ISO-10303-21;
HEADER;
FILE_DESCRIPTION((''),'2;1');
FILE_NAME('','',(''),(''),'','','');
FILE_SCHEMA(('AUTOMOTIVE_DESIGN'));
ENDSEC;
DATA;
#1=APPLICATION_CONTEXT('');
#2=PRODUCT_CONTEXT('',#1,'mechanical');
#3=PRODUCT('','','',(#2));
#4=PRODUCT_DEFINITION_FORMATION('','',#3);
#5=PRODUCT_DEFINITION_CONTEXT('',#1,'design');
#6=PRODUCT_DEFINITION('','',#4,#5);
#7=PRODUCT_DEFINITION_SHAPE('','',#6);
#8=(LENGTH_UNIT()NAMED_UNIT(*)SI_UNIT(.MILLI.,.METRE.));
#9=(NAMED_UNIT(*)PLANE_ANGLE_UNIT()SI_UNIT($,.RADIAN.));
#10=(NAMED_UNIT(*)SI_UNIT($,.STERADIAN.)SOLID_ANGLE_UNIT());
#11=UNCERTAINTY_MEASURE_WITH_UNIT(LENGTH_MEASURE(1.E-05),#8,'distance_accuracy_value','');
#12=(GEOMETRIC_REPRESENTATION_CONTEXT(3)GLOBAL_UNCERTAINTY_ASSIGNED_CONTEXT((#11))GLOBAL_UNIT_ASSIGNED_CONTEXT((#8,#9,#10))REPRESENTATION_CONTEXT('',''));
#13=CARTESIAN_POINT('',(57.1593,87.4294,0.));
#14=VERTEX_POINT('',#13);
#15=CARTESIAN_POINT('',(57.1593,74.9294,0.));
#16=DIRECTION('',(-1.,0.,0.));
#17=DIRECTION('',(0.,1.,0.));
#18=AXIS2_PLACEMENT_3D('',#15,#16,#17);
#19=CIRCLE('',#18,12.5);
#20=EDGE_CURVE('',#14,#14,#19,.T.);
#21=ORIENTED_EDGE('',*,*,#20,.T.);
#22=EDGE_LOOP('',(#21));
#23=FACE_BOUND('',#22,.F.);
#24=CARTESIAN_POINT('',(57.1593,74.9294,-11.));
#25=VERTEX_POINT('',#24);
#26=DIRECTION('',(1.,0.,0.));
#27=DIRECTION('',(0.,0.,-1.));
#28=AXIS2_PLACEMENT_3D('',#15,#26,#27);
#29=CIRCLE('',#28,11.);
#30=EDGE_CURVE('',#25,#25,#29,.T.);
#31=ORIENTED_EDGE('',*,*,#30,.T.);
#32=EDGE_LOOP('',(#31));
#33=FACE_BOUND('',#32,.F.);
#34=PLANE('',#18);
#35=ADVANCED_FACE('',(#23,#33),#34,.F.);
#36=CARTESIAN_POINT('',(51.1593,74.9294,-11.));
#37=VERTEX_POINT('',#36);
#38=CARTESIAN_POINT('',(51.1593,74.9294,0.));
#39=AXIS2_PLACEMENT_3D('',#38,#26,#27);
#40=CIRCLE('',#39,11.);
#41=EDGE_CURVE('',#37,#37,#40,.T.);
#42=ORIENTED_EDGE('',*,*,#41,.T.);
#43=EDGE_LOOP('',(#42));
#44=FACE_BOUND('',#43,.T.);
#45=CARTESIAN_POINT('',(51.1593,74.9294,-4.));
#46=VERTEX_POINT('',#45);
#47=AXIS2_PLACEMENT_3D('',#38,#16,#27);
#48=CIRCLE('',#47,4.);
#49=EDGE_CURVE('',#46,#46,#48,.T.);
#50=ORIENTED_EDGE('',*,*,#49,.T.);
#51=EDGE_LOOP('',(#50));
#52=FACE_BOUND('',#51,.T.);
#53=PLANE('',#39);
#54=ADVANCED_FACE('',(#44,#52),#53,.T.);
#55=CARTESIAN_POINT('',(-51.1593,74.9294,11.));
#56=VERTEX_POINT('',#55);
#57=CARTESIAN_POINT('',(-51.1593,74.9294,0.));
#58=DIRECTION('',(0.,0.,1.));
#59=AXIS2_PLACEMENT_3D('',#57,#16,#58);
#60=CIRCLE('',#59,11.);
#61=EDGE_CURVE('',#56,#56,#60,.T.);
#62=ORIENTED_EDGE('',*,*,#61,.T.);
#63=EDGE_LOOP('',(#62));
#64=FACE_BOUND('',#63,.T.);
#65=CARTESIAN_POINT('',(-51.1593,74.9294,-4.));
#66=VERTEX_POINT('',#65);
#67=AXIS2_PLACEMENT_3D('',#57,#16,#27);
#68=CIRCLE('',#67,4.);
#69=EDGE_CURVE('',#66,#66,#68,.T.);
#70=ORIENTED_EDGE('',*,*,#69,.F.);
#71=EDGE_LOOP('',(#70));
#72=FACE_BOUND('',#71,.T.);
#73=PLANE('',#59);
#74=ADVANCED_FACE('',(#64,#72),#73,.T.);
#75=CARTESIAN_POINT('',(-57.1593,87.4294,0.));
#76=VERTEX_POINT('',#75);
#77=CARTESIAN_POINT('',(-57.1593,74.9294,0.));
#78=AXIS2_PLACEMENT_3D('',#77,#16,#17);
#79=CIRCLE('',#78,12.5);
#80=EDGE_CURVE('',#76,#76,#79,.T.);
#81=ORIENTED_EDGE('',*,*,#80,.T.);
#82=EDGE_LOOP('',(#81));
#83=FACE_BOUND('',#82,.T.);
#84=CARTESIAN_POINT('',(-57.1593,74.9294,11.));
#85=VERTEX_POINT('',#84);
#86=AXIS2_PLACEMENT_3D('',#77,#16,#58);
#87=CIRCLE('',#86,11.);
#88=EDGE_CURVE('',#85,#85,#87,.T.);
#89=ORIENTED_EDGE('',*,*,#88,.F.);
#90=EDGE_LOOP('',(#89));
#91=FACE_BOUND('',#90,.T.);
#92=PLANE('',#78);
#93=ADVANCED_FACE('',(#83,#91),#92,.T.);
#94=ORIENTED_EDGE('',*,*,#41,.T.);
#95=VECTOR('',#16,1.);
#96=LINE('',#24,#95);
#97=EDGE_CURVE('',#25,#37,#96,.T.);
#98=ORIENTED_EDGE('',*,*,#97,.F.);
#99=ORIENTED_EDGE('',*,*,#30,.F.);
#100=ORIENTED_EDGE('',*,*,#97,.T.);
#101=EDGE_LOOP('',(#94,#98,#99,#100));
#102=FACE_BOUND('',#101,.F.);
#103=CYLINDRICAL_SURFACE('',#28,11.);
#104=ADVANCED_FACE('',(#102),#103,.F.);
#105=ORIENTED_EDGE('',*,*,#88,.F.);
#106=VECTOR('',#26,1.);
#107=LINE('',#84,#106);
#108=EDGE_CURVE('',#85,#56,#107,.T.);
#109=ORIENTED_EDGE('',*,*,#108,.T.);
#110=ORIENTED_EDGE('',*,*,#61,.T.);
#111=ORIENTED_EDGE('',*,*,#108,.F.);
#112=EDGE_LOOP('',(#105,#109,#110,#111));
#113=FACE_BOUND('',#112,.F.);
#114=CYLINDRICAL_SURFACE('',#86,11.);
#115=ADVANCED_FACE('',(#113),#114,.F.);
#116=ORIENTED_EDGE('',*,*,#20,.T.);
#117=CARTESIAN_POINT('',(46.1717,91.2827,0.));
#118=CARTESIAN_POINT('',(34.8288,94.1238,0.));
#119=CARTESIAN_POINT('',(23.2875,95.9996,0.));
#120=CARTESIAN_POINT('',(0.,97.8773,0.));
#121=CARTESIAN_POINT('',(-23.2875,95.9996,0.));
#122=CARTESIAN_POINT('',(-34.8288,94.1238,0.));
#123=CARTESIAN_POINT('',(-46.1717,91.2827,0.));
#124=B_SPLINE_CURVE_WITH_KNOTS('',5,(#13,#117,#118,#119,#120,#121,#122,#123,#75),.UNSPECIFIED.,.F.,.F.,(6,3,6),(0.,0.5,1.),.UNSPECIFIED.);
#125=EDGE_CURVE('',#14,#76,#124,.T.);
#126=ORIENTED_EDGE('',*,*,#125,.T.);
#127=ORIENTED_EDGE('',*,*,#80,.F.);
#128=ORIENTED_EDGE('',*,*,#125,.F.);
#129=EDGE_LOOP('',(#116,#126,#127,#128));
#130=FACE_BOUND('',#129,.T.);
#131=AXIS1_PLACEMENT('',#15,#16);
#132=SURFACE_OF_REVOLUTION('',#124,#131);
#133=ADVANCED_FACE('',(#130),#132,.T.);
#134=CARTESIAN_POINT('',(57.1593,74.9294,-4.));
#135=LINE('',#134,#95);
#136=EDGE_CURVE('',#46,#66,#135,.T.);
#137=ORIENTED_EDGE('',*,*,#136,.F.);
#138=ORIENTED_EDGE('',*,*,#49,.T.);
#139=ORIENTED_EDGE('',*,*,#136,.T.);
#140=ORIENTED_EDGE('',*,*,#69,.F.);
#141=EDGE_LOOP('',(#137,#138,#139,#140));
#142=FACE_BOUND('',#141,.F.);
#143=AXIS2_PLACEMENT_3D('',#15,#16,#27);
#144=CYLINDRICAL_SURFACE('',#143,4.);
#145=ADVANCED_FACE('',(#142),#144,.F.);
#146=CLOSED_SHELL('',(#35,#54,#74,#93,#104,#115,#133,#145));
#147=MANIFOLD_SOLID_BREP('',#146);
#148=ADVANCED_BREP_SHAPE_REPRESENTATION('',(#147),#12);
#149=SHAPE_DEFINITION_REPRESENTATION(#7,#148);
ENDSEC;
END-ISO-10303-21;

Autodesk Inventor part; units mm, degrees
ref_plane "YZ Plane" through (0, 0, 0) normal (1, 0, 0) x (0, 1, 0)
ref_plane "XZ Plane" through (0, 0, 0) normal (0, 1, 0) x (-1, 0, 0)
ref_plane "Work Plane1" through (0, 0, 0) normal (0, -0.7071068, 0.7071068) x (1, 0, 0)
sketch "Sketch1" plane through (0, 0, 0) normal (0, -0.7071068, 0.7071068) x (1, 0, 0)
  circle A0 centre (0, 0) radius 100 construction
  dimension "d1" = 200
sketch "Sketch2" plane through (0, 0, 0) normal (0, 0, 1) x (1, 0, 0)
  line L0 (0, 0) -> (0, 100) construction
  line L1 (0, 0) -> (135.52, 0) construction
  circle A0 centre (0, 74.9294) radius 25 construction
  circle A1 centre (0, 74.9294) radius 12.5 construction
  line L2 (89.6381, 86.81) -> (-89.6381, 86.81) construction
  line L3 (-67.2707, 86.81) -> (-67.2707, 75) construction
  line L4 (-65.5817, 87.4347) -> (-65.5817, 74.9294) construction
  line L5 (65.5817, 87.4347) -> (65.5817, 74.9294) construction
  ellipse E0 centre (0, 0) end of major axis (135.4472, 0) minor radius 99.9294 (65.5817, 87.4347) -> (-65.5817, 87.4347) ccw construction
  line L6 (-62.6083, 85.4701) -> (-62.6083, 74.9294) construction
  line L7 (62.5858, 74.9294) -> (62.5858, 85.4128) construction
  line L8 (-57.1593, 87.4294) -> (-57.1593, 74.9294)
  line L9 (57.1593, 87.4294) -> (-57.1593, 87.4294) construction
  line L10 (57.1593, 87.4294) -> (57.1593, 74.9294)
  line L11 (57.1593, 74.9294) -> (-57.1593, 74.9294)
  spline S0 degree 5 poles (57.1593, 87.4294) (46.1717, 91.2827) (34.8288, 94.1238) (23.2875, 95.9996) (0, 97.8773) (-23.2875, 95.9996) (-34.8288, 94.1238) (-46.1717, 91.2827) (-57.1593, 87.4294) knots 0 0 0 0 0 0 0.5 0.5 0.5 1 1 1 1 1 1
  dimension "d40" = 135.4471
  dimension "d41" = 99.9294
  dimension "d24" = 50
  dimension "d25" = 0
  dimension "d26" = 25
  dimension "d42" = 86.81
  dimension "d43" = 2.9958
  dimension "d44" = 8.4224
  dimension "d45" = 65.5817
  dimension "d46" = 128.19
  dimension "d47" = 132.8524
  dimension "d48" = 0
  dimension "d49" = 65.5817
  dimension "d50" = 69.9383
  dimension "d51" = 24.0564
  dimension "d52" = 74.9294
  dimension "d53" = 85.4129
  dimension "d54" = 74.9294
  dimension "d55" = 100
  dimension "d56" = 85.4701
  dimension "d57" = 74.9294
  dimension "d58" = 75
  dimension "d59" = 155.2197
revolve "Revolution3" add sketch "Sketch2" angle 360 about axis through (57.1593, 74.9294, 0) along (-1, 0, 0)
sketch "Sketch6" plane through (-57.1593, 74.9294, 0) normal (-1, 0, 0) x (0, 0, 1)
  circle A0 centre (0, 0) radius 12.5 projected
  circle A1 centre (0, 0) radius 11
  point P0 (0, -74.9294)
  point P1 (0, 12.5)
  dimension "d61" = 22
extrude "Extrusion3" cut sketch "Sketch6" against normal blind 6 contours A1
sketch "Sketch7" plane through (57.1593, 74.9294, 0) normal (1, 0, 0) x (0, 0, -1)
  circle A0 centre (0, 0) radius 12.5 projected
  circle A1 centre (0, 0) radius 11
  point P0 (0, -74.9294)
  point P1 (0, 12.5)
  dimension "d64" = 22
extrude "Extrusion4" cut sketch "Sketch7" against normal blind 6 contours A1
hole "Hole2" at (57.1593, 74.9294, 0) direction (-1, 0, 0) diameter 8 end through all
properties part number "RollerRedesign5"
